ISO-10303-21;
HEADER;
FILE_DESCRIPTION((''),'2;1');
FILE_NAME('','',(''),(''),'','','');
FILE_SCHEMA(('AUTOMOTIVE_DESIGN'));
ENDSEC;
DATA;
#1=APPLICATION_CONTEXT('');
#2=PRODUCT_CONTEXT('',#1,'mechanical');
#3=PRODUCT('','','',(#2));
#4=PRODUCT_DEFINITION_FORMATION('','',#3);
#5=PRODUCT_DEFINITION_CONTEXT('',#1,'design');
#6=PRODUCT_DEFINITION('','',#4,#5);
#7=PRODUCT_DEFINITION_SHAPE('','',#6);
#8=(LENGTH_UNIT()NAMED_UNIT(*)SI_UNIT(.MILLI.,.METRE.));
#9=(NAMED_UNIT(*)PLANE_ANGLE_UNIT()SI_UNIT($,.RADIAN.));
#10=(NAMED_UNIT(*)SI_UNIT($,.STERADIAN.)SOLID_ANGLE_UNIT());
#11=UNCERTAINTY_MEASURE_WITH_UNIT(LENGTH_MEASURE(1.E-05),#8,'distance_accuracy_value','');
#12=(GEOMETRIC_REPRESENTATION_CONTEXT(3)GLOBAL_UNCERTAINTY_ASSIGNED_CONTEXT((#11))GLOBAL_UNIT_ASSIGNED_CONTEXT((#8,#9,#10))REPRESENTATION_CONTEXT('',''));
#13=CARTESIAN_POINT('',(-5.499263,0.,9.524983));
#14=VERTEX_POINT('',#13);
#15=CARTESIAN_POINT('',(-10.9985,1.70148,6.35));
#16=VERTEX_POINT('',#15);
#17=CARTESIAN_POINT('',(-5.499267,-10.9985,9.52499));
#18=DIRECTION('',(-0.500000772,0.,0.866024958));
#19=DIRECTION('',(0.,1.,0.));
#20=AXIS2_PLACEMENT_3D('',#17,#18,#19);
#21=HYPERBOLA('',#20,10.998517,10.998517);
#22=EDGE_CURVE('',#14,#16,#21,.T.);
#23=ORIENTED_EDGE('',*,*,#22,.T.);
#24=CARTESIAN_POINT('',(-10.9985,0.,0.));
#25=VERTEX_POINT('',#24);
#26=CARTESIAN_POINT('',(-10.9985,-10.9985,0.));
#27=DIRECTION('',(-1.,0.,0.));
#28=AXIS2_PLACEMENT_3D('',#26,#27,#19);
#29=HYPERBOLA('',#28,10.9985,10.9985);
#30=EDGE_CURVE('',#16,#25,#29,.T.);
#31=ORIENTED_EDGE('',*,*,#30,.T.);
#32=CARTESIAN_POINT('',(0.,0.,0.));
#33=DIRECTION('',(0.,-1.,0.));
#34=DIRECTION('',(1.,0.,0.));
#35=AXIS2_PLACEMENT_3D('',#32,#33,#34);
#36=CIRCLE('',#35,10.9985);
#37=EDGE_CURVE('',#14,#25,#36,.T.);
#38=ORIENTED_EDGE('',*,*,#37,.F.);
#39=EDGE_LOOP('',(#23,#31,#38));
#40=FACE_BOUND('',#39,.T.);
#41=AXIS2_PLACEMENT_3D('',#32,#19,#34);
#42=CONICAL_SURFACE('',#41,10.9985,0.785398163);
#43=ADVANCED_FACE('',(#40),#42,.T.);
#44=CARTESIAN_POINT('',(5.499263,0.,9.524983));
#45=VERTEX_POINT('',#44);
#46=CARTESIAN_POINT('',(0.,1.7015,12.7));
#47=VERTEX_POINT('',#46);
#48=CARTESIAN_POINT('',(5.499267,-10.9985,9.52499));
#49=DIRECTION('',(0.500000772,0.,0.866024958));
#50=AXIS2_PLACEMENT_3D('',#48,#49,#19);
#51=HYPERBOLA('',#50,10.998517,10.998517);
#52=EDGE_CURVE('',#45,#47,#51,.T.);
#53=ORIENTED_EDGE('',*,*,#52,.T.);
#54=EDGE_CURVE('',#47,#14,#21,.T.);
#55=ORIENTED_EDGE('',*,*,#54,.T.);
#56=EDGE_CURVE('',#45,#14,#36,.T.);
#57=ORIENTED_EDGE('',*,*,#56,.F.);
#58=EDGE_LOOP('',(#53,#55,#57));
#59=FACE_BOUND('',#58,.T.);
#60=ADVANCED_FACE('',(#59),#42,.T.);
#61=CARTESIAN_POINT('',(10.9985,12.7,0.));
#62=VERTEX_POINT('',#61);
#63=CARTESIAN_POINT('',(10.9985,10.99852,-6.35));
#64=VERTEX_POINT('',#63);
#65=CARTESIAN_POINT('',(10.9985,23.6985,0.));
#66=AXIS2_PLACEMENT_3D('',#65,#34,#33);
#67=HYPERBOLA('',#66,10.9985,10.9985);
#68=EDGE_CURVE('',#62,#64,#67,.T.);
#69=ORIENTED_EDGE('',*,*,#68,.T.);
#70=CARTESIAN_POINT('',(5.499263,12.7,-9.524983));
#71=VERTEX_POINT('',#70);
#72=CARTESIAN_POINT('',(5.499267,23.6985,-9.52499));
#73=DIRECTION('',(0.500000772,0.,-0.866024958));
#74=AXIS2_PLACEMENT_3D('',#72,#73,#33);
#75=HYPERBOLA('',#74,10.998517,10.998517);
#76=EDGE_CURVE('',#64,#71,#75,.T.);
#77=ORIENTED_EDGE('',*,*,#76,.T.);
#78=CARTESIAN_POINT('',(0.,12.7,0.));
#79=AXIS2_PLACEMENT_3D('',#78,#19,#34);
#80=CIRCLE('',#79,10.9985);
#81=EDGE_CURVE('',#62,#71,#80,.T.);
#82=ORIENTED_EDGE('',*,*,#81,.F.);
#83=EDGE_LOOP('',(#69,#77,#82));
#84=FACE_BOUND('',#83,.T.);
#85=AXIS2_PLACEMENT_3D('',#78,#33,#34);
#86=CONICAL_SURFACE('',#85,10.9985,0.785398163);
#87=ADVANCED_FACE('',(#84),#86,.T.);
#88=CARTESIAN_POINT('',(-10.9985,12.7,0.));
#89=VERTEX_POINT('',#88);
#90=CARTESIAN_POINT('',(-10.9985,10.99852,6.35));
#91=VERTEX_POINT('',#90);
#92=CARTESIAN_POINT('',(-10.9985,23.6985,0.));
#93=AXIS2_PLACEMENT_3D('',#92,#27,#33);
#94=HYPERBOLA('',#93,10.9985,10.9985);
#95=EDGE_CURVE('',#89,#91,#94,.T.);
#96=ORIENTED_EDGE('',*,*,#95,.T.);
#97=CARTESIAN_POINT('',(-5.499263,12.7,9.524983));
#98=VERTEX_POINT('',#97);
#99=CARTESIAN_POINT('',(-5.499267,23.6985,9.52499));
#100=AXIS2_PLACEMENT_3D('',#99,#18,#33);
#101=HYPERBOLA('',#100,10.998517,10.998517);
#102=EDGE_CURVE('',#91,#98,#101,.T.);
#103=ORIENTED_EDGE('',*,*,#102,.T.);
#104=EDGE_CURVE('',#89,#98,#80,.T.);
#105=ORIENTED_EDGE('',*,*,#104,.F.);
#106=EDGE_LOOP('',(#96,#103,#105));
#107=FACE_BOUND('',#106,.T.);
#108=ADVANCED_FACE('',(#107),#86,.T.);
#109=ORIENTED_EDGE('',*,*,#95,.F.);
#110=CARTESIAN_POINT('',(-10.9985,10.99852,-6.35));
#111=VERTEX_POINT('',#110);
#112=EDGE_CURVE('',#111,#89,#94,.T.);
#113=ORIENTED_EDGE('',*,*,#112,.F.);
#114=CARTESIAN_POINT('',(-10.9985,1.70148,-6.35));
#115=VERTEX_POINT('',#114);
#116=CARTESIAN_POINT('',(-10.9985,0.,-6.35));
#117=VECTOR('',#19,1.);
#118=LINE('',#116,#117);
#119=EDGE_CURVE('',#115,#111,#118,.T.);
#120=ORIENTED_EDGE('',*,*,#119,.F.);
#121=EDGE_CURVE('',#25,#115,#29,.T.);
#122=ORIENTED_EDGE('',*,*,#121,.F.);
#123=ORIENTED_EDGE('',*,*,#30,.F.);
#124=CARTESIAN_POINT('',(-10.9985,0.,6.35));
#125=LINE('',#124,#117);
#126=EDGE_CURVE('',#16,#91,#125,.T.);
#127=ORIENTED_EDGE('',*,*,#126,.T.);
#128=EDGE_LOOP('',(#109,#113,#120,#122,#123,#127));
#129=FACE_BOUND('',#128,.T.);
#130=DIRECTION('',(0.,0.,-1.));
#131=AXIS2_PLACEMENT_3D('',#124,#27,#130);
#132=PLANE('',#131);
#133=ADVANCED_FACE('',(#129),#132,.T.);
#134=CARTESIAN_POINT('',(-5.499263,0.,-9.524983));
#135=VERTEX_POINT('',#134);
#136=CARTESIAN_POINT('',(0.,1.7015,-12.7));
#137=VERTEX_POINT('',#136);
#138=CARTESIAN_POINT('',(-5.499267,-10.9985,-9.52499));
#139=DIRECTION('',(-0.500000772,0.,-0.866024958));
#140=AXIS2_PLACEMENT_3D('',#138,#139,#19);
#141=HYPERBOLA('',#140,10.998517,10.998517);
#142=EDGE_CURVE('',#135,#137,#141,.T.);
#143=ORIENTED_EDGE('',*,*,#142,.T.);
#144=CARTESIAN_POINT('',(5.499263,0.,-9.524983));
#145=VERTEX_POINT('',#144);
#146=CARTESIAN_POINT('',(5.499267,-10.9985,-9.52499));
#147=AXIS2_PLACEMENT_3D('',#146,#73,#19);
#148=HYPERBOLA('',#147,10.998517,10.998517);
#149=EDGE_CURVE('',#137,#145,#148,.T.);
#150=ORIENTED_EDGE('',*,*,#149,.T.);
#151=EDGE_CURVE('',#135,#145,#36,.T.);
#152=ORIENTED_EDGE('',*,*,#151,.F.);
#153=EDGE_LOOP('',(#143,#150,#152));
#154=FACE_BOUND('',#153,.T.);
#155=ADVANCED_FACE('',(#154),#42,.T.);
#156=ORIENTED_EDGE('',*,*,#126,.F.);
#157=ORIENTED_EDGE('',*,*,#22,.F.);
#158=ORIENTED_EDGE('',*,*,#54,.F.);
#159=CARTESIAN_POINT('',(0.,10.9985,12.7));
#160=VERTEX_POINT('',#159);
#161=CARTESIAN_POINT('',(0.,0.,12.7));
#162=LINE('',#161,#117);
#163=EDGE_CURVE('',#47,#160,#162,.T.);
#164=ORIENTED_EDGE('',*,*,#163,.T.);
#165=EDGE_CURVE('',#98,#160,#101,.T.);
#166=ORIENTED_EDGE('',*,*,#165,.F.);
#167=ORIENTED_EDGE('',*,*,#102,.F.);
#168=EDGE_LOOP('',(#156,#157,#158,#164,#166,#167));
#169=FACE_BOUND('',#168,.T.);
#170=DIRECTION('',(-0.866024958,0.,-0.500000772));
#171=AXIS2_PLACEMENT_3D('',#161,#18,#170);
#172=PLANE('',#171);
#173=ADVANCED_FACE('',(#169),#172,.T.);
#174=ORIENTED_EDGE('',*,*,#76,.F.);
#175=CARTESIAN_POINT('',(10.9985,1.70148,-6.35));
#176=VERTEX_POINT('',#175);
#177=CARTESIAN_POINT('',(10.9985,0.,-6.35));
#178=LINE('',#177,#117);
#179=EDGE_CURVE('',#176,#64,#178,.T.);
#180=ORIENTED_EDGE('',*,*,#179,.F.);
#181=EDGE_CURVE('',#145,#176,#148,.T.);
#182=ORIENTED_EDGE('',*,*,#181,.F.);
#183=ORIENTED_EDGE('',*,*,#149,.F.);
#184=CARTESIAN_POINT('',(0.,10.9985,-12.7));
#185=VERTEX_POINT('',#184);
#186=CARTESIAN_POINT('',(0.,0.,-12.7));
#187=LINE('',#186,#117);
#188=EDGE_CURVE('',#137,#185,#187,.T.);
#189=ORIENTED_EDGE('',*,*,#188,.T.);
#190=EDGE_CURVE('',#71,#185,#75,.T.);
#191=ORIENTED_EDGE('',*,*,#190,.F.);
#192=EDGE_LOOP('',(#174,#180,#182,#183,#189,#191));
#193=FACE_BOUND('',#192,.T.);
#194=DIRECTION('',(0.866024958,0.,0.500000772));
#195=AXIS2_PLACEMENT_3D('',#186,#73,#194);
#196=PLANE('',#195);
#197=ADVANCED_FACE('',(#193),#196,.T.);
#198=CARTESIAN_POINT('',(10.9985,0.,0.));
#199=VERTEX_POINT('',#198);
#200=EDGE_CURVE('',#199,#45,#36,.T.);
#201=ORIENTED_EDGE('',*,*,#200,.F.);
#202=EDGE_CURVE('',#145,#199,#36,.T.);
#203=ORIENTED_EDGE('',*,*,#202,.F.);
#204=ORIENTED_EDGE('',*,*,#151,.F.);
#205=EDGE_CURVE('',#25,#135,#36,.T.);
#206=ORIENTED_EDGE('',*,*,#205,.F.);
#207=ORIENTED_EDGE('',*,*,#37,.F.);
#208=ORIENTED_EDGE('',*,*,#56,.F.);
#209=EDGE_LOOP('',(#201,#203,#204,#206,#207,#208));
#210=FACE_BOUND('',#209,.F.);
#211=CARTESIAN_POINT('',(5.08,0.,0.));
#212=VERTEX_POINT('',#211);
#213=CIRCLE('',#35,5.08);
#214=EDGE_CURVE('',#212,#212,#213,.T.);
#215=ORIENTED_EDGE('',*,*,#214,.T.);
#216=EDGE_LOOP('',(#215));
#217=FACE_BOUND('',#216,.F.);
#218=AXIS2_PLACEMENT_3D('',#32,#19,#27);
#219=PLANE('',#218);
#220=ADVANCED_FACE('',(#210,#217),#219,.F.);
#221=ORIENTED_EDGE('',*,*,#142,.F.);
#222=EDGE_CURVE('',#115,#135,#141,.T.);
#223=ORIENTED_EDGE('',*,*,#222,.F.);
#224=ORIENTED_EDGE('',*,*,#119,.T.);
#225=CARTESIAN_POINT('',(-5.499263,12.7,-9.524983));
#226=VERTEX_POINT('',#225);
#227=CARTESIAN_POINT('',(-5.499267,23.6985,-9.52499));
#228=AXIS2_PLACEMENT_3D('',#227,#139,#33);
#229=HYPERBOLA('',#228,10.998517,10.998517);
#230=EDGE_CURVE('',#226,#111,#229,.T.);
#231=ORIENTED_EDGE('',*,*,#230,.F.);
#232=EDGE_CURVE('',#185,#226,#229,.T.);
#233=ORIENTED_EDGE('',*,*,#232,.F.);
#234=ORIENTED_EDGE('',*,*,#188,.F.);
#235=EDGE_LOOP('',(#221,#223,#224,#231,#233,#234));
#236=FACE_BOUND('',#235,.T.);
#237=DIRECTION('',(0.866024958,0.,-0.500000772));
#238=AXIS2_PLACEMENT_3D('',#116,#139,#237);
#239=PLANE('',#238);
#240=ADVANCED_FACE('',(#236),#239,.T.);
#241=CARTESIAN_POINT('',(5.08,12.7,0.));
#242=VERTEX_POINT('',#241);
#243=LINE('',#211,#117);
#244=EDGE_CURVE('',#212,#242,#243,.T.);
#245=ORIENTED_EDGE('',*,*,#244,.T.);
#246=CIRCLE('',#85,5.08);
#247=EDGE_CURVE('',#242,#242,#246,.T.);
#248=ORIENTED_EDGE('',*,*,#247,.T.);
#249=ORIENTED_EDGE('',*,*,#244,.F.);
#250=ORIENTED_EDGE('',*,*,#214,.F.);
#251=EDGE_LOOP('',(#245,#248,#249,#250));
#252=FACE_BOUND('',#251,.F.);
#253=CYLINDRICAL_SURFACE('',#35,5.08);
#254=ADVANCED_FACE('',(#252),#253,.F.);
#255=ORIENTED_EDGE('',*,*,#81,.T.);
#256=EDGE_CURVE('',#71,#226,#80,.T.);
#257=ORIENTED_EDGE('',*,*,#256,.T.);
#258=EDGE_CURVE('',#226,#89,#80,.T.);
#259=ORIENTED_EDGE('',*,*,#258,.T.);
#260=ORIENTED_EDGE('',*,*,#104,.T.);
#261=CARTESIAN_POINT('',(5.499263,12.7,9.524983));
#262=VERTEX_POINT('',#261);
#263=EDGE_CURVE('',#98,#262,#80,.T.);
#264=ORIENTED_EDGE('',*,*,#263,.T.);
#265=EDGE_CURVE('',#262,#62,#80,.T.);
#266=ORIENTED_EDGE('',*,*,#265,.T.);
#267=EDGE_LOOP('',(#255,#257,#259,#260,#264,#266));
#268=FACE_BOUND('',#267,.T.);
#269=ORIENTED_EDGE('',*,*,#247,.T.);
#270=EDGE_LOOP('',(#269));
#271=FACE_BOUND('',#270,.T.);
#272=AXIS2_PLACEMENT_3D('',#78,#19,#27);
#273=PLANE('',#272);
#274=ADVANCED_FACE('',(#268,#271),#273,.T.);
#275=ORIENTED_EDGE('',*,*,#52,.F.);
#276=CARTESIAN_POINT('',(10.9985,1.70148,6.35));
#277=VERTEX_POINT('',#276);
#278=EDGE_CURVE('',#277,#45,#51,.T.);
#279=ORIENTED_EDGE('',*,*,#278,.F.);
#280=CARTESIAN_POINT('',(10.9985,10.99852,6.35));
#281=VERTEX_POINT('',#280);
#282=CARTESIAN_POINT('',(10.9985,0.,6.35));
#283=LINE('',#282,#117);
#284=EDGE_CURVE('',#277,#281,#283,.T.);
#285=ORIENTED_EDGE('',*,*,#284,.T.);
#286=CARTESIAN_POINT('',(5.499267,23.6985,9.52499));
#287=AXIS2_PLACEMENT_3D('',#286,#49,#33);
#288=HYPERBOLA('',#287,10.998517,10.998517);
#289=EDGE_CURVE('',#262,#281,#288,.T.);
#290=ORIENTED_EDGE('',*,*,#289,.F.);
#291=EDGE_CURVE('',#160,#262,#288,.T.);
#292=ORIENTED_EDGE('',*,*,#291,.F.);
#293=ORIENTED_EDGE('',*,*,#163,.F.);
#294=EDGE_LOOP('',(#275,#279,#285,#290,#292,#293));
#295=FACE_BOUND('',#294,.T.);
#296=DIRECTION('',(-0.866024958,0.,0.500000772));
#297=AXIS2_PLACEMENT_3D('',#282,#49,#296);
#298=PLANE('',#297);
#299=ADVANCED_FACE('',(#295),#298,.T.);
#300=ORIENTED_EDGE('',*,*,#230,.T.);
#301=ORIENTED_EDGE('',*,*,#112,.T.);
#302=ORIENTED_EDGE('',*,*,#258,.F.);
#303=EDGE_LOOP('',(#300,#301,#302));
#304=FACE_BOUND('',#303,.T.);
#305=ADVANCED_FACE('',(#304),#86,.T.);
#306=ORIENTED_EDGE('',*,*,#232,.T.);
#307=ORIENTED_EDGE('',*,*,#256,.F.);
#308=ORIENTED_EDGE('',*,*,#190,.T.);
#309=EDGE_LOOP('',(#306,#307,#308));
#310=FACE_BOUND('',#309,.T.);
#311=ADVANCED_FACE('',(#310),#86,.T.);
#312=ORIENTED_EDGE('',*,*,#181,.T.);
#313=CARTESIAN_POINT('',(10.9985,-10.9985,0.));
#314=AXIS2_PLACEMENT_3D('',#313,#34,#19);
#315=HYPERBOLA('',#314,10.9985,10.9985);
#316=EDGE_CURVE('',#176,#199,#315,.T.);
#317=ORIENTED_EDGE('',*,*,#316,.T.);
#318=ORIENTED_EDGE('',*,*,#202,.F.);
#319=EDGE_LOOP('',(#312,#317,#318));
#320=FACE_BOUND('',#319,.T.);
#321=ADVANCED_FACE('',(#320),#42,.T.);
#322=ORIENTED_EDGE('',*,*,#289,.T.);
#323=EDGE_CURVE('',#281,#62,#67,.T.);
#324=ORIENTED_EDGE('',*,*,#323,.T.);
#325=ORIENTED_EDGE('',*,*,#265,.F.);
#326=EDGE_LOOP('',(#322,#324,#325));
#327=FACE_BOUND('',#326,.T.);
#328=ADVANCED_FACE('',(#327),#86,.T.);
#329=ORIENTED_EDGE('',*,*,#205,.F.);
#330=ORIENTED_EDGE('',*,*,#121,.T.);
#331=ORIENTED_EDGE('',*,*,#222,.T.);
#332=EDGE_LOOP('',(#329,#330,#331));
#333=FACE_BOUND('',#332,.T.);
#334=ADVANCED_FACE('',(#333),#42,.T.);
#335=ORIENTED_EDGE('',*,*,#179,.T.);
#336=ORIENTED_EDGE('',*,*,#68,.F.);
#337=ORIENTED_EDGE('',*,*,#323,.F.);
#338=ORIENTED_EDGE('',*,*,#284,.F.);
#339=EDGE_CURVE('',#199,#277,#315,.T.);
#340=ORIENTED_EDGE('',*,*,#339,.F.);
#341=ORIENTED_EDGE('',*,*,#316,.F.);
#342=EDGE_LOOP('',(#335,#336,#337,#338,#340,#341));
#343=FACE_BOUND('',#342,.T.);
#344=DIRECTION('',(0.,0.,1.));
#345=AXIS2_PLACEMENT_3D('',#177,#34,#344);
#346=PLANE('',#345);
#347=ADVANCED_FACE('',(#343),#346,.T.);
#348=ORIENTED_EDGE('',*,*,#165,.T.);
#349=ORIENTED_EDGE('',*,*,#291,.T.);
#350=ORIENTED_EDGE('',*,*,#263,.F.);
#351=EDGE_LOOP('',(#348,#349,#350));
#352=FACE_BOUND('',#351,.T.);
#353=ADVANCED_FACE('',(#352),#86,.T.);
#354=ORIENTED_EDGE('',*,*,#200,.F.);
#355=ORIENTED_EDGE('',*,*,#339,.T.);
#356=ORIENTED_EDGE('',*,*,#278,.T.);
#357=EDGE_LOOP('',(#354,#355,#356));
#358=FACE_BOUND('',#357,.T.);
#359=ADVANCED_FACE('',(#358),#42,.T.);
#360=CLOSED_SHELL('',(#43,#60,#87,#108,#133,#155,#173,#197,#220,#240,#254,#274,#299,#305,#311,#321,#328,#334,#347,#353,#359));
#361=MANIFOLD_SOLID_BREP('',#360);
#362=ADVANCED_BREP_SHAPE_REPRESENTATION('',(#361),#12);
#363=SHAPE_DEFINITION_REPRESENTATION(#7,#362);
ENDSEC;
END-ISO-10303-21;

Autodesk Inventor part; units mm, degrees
ref_plane "YZ Plane" through (0, 0, 0) normal (1, 0, 0) x (0, 1, 0)
ref_plane "XZ Plane" through (0, 0, 0) normal (0, 1, 0) x (-1, 0, 0)
ref_plane "XY Plane" through (0, 0, 0) normal (0, 0, 1) x (1, 0, 0)
sketch "Sketch1" plane through (0, 0, 0) normal (0, 1, 0) x (-1, 0, 0)
  line L0 (10.9985, -6.35) -> (0, -12.7)
  line L1 (0, -12.7) -> (-10.9985, -6.35)
  line L2 (-10.9985, -6.35) -> (-10.9985, 6.35)
  line L3 (-10.9985, 6.35) -> (0, 12.7)
  line L4 (0, 12.7) -> (10.9985, 6.35)
  line L5 (10.9985, 6.35) -> (10.9985, -6.35)
  point P0 (0, 0)
  point P1 (0, 0)
  dimension "d2" = 25.4
extrude "Extrusion1" add sketch "Sketch1" along normal blind 12.7
sketch "Sketch2" plane through (0, 12.7, 0) normal (0, 1, 0) x (1, 0, 0)
  circle A0 centre (0, 0) radius 10.9985
extrude "Extrusion2" cut sketch "Sketch2" against normal through all draft 45 keep common part
sketch "Sketch3" plane through (0, 0, 0) normal (0, -1, 0) x (1, 0, 0)
  circle A0 centre (0, 0) radius 10.9985
extrude "Extrusion3" cut sketch "Sketch3" against normal through all draft 45 keep common part
sketch "Sketch4" plane through (0, 0, 0) normal (0, -1, 0) x (1, 0, 0)
  circle A0 centre (0, 0) radius 5.08
  dimension "d9" = 10.16
extrude "Extrusion4" cut sketch "Sketch4" against normal through all
properties part number "Nut"
